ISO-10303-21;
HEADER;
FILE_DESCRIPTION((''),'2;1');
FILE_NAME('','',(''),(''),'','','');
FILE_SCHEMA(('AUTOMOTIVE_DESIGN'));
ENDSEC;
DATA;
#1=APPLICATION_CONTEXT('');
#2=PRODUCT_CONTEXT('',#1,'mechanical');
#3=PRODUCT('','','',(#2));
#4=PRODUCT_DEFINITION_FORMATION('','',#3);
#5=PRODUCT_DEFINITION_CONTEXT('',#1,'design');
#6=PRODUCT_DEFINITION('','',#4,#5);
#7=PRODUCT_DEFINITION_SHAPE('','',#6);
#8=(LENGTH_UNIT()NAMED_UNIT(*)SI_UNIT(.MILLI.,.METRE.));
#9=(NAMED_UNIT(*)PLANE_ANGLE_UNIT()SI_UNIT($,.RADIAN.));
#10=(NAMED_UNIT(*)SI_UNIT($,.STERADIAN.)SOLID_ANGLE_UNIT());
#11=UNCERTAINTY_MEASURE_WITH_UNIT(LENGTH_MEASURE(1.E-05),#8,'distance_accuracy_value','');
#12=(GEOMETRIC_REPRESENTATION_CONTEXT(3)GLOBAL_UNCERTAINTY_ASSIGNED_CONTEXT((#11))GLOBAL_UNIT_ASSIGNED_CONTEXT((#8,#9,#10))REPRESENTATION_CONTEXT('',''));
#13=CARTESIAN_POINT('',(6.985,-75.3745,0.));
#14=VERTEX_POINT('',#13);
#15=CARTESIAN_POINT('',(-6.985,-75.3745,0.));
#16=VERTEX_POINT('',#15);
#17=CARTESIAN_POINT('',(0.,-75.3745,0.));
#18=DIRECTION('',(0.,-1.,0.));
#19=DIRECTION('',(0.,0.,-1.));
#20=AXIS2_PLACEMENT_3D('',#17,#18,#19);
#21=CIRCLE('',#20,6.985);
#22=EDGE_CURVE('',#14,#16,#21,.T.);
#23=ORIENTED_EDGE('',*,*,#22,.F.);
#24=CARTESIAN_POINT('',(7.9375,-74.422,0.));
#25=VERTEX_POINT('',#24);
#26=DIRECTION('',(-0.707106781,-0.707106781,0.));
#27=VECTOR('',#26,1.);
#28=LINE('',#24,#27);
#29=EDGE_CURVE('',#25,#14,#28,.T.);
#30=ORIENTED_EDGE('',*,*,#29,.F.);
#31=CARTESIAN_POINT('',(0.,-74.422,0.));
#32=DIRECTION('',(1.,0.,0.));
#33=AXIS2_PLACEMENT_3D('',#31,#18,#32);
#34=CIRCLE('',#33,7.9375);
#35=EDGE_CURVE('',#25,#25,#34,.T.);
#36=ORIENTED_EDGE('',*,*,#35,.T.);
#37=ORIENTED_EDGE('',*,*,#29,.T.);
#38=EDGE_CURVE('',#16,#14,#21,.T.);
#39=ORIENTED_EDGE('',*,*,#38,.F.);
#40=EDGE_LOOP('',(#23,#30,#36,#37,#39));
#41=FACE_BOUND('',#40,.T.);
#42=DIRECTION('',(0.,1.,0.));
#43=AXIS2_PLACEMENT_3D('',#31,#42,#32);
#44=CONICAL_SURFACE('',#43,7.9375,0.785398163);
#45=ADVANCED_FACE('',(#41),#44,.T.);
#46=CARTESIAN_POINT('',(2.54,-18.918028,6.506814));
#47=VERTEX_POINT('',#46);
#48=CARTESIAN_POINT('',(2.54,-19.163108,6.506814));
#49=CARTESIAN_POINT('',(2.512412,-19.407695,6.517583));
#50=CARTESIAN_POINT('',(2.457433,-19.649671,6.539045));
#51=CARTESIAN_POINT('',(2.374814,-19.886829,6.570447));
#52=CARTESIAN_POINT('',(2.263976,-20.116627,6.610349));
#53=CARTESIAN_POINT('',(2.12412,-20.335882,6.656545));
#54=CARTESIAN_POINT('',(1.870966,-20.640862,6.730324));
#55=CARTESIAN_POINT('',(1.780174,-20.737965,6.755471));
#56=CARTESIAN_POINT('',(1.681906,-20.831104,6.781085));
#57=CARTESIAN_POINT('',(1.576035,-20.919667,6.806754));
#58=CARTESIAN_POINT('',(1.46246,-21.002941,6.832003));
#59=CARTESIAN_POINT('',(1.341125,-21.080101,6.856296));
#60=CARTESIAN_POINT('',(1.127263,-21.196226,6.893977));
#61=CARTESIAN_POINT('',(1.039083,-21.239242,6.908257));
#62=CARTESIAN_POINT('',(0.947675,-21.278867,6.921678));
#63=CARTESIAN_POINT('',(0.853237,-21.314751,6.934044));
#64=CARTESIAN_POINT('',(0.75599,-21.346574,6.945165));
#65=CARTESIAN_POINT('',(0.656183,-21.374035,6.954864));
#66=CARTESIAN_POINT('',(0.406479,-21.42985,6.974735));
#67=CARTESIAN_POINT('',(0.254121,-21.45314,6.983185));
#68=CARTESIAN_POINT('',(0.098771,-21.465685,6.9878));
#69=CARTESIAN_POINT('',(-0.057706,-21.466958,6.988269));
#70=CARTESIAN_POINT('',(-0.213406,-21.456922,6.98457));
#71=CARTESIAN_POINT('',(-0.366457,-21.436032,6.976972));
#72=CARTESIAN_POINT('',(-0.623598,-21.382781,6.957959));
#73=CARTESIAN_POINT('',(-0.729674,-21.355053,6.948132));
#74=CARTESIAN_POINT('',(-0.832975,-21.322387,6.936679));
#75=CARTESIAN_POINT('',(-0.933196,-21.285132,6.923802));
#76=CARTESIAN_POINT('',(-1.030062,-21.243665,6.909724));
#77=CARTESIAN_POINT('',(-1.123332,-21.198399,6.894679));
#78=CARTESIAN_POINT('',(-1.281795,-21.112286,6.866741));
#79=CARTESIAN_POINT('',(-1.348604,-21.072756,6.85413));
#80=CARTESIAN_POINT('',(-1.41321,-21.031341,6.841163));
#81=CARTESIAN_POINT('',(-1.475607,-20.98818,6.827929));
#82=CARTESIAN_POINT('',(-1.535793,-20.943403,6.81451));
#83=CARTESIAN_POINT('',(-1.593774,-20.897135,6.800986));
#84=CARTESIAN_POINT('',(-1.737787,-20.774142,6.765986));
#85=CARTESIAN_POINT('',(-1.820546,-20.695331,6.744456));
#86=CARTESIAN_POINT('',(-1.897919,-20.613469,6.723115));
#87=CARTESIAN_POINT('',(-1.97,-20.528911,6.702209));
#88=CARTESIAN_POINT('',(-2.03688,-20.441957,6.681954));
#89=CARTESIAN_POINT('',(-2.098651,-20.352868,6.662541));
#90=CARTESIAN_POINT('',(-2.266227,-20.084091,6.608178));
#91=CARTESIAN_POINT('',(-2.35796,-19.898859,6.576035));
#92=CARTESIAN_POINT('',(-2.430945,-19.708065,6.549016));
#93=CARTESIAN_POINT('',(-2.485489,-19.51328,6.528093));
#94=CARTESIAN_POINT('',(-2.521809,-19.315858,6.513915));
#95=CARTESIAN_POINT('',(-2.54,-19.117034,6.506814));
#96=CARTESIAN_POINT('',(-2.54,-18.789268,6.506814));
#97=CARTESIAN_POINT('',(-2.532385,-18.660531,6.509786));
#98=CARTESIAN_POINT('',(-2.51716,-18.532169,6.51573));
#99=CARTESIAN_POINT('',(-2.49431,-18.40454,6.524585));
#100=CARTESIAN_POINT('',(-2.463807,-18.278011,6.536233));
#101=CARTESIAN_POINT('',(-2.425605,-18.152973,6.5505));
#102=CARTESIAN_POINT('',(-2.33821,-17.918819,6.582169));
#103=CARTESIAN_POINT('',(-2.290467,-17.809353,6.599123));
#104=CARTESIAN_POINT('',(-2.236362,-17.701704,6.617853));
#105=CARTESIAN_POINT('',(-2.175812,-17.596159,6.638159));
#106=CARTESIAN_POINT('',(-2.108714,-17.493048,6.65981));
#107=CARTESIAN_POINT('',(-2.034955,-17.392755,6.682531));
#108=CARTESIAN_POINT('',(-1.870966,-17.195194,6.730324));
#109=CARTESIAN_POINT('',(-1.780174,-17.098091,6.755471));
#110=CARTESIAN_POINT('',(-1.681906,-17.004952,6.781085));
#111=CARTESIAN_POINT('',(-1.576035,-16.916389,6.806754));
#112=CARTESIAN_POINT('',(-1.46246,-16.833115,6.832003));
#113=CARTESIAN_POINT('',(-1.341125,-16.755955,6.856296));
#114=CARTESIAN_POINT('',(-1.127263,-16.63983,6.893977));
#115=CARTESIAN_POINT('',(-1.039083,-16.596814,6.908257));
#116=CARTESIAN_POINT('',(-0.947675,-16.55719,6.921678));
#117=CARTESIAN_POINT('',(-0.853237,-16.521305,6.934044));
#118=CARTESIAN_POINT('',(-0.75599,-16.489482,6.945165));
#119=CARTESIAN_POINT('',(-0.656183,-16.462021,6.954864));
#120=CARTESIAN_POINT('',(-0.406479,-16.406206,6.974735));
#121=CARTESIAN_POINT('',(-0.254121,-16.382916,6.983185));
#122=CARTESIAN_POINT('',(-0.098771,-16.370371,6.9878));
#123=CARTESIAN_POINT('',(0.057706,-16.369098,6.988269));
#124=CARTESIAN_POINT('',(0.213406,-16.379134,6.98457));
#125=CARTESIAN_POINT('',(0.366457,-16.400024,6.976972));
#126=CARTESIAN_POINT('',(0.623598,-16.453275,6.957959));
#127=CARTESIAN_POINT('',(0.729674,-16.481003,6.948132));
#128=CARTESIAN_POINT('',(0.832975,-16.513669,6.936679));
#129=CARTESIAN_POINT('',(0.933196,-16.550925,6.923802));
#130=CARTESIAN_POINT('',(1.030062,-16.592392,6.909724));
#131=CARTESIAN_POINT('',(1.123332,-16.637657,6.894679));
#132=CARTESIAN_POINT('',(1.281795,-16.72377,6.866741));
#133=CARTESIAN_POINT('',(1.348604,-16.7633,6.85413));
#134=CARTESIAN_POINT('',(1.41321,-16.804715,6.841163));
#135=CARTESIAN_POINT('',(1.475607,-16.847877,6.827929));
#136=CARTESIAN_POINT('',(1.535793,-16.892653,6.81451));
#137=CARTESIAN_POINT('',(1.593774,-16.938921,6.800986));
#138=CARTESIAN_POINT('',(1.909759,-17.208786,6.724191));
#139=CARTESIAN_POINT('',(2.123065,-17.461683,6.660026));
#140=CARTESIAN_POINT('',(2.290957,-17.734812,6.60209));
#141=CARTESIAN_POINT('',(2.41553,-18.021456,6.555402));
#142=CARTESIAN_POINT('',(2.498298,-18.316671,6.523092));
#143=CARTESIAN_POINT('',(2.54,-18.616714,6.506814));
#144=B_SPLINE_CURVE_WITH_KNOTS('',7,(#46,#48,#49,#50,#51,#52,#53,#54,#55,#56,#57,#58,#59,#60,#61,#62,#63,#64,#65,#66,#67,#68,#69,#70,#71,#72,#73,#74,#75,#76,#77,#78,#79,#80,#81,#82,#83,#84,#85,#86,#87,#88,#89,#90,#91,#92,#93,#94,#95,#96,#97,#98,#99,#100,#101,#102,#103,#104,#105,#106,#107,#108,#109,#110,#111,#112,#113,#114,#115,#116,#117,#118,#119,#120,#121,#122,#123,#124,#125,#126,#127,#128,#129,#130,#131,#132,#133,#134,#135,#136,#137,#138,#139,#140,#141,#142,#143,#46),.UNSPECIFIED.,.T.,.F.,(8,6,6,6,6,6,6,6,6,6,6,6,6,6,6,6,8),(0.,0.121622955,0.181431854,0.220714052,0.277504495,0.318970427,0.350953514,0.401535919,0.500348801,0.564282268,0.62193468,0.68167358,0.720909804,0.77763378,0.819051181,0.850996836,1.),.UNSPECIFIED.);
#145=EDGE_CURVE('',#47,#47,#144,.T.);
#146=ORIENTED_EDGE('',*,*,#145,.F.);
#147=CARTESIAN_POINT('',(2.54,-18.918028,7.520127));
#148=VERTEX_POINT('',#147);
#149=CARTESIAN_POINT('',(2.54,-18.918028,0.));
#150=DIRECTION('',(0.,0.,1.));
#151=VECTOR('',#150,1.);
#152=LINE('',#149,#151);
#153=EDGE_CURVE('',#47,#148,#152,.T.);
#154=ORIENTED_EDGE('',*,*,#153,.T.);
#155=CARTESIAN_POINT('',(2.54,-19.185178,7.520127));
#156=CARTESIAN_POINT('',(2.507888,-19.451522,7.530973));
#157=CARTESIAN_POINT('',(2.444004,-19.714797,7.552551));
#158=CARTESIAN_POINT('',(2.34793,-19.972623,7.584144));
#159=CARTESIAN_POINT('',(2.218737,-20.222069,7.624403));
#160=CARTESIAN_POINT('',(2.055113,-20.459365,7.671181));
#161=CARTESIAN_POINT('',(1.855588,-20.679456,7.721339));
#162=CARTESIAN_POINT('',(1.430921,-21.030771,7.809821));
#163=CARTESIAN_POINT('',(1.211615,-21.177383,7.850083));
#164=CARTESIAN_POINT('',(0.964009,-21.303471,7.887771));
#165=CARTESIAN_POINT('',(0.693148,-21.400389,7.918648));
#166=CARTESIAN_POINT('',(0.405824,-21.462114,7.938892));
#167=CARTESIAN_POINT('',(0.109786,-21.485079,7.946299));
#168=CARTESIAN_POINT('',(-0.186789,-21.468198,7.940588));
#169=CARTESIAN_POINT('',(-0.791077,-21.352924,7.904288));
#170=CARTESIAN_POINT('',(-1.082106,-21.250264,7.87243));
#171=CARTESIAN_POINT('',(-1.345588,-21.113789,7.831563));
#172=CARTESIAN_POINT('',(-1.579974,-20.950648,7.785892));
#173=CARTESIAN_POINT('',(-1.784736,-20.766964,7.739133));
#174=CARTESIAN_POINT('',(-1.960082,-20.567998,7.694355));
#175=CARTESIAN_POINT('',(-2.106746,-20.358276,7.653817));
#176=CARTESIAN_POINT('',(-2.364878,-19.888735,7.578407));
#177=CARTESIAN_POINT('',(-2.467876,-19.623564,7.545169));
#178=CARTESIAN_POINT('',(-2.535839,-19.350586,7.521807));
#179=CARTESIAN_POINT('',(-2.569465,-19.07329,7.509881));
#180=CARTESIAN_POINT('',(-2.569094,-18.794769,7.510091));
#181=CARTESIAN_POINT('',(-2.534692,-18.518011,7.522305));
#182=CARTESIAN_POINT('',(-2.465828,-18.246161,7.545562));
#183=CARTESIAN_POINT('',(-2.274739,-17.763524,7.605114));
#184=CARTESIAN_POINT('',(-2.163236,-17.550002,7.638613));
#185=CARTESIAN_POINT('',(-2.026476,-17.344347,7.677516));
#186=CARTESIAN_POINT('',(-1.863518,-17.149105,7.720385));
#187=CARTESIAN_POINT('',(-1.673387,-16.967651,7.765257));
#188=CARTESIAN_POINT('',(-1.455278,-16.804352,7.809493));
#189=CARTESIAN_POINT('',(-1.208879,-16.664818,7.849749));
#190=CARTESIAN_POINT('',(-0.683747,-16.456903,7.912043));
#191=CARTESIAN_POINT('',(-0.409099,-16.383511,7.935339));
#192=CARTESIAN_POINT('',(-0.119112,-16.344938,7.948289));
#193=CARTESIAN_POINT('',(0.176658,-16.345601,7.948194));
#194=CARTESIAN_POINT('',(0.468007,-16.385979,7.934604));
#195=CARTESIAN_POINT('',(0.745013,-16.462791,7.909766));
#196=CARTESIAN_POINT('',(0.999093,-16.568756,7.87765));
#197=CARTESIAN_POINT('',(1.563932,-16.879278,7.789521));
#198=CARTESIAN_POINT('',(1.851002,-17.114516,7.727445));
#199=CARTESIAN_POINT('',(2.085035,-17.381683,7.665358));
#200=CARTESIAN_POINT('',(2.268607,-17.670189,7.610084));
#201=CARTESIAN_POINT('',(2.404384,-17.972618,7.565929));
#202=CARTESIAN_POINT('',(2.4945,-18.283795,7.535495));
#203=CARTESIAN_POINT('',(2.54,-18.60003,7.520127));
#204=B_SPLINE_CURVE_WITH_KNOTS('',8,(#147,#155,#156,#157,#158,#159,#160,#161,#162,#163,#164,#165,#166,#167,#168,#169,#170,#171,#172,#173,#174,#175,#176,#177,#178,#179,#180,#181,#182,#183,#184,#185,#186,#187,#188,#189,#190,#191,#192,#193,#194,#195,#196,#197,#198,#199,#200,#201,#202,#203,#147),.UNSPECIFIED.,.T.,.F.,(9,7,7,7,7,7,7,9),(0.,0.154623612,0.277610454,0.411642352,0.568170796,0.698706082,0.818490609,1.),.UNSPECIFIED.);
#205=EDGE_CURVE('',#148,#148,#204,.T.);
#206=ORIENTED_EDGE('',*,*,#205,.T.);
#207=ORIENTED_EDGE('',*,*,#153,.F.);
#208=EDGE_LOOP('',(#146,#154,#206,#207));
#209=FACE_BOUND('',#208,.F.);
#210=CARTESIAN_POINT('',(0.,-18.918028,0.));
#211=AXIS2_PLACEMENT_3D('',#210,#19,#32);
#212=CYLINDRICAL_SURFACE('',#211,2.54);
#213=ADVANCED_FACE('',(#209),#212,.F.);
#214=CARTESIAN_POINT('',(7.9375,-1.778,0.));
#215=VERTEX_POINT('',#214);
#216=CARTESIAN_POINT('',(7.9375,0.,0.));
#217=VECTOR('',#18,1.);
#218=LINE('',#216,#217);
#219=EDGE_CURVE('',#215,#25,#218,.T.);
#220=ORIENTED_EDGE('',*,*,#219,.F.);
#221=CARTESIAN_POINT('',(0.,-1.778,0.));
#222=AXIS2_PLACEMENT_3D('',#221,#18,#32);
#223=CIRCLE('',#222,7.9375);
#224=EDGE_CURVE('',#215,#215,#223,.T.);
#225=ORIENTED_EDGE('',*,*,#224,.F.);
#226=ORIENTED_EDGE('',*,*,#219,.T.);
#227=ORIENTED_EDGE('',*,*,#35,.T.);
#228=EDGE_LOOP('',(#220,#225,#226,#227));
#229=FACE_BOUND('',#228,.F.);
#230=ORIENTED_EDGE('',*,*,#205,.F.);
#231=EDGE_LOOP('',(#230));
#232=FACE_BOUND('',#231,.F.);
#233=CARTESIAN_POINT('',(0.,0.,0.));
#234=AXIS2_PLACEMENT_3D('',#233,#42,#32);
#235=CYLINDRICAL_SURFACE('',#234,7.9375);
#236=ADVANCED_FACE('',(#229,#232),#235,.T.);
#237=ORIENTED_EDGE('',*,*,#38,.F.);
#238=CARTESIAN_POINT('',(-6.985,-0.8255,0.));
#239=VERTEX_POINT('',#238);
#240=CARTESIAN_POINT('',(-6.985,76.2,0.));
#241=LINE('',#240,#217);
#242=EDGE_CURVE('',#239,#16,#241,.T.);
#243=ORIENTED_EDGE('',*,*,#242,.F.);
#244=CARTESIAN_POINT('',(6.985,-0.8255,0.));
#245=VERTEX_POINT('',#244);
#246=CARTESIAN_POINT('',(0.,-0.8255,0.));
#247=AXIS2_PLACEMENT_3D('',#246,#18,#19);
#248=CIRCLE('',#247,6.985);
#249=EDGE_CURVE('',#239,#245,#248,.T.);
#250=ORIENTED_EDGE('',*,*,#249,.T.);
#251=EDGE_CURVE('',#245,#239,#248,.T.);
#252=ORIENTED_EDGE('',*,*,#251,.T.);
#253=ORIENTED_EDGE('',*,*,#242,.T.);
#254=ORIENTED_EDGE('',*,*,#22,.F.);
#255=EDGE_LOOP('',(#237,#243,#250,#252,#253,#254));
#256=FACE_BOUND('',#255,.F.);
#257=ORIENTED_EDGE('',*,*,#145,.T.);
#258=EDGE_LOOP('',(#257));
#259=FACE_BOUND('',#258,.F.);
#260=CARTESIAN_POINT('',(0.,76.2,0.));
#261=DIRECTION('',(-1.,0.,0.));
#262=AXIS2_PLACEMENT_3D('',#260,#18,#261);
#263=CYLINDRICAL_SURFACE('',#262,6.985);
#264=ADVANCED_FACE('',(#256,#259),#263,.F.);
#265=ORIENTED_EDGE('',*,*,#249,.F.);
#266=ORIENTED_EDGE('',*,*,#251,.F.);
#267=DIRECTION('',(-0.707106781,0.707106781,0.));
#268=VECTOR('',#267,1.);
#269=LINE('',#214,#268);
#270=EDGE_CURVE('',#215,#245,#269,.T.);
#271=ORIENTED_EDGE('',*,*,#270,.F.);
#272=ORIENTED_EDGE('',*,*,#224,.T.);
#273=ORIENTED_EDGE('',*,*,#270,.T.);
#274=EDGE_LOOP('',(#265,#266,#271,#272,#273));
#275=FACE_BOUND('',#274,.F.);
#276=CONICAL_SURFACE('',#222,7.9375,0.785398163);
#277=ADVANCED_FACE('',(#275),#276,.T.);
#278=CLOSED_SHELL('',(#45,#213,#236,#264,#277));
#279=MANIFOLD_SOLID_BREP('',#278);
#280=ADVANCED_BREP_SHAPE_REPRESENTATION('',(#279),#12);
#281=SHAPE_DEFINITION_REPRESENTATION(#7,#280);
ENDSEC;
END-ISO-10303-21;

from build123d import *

# Parameters (mm, degrees)
F0_R     = 7.9375
F1_DEPTH = 76.2
F3_D     = 13.97
F3_DEPTH = 76.2
F3_TIP   = 4.1970114239
F7_D     = 5.08
F7_DEPTH = 25.4
F7_TIP   = 1.5261859723


# Not quite as in the source:
# - a fillet or chamfer that OpenCascade refuses, or shapes differently, is made with other operations: its cross-section is extruded or revolved along the edge and cut away or added


with BuildPart() as f1:
    # F0 (on Front) → F1 (new body)
    with BuildSketch(Plane.XZ):
        Circle(F0_R)
    extrude(amount=F1_DEPTH)

    # F3
    with Locations(Plane(origin=(0, 0, 0), x_dir=(1, 0, 0), z_dir=(0, 1, 0))):
        with Locations((0, 0)):
            Hole(F3_D / 2, depth=F3_DEPTH)
            with Locations((0, 0, -(F3_DEPTH + F3_TIP / 2))):  # 118° drill point
                Cone(0, F3_D / 2, F3_TIP, mode=Mode.SUBTRACT)

    # F4: chamfer of 1.778 on 1 edges, made by hand

    # F4_s1 → F4_t2 (revolve, cut)
    with BuildSketch(Plane.XY):
        Polygon((7.9375, -74.422), (6.1595, -76.2), (7.9375, -76.2), align=None)
    revolve(axis=Axis((0, -76.2, 0), (0, -1, 0)), mode=Mode.SUBTRACT)

    # F5: chamfer of 1.778 on 1 edges, made by hand

    # F5_s1 → F5_t2 (revolve, cut)
    with BuildSketch(Plane.XY):
        Polygon((7.9375, -1.778), (6.1595, 0), (7.9375, 0), align=None)
    revolve(axis=Axis((0, 0, 0), (0, -1, 0)), mode=Mode.SUBTRACT)

    # F7 (one way)
    with BuildSketch(Plane(origin=(0, 0, 0), x_dir=(1, 0, 0), z_dir=(0, 0, -1))):
        with Locations((0, 18.9180281013)):
            Circle(F7_D / 2)
    extrude(amount=-F7_DEPTH, mode=Mode.SUBTRACT)
    with Locations(Plane(origin=(0, 0, 0), x_dir=(1, 0, 0), z_dir=(0, 0, -1))):
        with Locations((0, 18.9180281013)):
            with Locations((0, 0, -(F7_DEPTH + F7_TIP / 2))):  # 118° drill point
                Cone(0, F7_D / 2, F7_TIP, mode=Mode.SUBTRACT)


solid = f1.part
